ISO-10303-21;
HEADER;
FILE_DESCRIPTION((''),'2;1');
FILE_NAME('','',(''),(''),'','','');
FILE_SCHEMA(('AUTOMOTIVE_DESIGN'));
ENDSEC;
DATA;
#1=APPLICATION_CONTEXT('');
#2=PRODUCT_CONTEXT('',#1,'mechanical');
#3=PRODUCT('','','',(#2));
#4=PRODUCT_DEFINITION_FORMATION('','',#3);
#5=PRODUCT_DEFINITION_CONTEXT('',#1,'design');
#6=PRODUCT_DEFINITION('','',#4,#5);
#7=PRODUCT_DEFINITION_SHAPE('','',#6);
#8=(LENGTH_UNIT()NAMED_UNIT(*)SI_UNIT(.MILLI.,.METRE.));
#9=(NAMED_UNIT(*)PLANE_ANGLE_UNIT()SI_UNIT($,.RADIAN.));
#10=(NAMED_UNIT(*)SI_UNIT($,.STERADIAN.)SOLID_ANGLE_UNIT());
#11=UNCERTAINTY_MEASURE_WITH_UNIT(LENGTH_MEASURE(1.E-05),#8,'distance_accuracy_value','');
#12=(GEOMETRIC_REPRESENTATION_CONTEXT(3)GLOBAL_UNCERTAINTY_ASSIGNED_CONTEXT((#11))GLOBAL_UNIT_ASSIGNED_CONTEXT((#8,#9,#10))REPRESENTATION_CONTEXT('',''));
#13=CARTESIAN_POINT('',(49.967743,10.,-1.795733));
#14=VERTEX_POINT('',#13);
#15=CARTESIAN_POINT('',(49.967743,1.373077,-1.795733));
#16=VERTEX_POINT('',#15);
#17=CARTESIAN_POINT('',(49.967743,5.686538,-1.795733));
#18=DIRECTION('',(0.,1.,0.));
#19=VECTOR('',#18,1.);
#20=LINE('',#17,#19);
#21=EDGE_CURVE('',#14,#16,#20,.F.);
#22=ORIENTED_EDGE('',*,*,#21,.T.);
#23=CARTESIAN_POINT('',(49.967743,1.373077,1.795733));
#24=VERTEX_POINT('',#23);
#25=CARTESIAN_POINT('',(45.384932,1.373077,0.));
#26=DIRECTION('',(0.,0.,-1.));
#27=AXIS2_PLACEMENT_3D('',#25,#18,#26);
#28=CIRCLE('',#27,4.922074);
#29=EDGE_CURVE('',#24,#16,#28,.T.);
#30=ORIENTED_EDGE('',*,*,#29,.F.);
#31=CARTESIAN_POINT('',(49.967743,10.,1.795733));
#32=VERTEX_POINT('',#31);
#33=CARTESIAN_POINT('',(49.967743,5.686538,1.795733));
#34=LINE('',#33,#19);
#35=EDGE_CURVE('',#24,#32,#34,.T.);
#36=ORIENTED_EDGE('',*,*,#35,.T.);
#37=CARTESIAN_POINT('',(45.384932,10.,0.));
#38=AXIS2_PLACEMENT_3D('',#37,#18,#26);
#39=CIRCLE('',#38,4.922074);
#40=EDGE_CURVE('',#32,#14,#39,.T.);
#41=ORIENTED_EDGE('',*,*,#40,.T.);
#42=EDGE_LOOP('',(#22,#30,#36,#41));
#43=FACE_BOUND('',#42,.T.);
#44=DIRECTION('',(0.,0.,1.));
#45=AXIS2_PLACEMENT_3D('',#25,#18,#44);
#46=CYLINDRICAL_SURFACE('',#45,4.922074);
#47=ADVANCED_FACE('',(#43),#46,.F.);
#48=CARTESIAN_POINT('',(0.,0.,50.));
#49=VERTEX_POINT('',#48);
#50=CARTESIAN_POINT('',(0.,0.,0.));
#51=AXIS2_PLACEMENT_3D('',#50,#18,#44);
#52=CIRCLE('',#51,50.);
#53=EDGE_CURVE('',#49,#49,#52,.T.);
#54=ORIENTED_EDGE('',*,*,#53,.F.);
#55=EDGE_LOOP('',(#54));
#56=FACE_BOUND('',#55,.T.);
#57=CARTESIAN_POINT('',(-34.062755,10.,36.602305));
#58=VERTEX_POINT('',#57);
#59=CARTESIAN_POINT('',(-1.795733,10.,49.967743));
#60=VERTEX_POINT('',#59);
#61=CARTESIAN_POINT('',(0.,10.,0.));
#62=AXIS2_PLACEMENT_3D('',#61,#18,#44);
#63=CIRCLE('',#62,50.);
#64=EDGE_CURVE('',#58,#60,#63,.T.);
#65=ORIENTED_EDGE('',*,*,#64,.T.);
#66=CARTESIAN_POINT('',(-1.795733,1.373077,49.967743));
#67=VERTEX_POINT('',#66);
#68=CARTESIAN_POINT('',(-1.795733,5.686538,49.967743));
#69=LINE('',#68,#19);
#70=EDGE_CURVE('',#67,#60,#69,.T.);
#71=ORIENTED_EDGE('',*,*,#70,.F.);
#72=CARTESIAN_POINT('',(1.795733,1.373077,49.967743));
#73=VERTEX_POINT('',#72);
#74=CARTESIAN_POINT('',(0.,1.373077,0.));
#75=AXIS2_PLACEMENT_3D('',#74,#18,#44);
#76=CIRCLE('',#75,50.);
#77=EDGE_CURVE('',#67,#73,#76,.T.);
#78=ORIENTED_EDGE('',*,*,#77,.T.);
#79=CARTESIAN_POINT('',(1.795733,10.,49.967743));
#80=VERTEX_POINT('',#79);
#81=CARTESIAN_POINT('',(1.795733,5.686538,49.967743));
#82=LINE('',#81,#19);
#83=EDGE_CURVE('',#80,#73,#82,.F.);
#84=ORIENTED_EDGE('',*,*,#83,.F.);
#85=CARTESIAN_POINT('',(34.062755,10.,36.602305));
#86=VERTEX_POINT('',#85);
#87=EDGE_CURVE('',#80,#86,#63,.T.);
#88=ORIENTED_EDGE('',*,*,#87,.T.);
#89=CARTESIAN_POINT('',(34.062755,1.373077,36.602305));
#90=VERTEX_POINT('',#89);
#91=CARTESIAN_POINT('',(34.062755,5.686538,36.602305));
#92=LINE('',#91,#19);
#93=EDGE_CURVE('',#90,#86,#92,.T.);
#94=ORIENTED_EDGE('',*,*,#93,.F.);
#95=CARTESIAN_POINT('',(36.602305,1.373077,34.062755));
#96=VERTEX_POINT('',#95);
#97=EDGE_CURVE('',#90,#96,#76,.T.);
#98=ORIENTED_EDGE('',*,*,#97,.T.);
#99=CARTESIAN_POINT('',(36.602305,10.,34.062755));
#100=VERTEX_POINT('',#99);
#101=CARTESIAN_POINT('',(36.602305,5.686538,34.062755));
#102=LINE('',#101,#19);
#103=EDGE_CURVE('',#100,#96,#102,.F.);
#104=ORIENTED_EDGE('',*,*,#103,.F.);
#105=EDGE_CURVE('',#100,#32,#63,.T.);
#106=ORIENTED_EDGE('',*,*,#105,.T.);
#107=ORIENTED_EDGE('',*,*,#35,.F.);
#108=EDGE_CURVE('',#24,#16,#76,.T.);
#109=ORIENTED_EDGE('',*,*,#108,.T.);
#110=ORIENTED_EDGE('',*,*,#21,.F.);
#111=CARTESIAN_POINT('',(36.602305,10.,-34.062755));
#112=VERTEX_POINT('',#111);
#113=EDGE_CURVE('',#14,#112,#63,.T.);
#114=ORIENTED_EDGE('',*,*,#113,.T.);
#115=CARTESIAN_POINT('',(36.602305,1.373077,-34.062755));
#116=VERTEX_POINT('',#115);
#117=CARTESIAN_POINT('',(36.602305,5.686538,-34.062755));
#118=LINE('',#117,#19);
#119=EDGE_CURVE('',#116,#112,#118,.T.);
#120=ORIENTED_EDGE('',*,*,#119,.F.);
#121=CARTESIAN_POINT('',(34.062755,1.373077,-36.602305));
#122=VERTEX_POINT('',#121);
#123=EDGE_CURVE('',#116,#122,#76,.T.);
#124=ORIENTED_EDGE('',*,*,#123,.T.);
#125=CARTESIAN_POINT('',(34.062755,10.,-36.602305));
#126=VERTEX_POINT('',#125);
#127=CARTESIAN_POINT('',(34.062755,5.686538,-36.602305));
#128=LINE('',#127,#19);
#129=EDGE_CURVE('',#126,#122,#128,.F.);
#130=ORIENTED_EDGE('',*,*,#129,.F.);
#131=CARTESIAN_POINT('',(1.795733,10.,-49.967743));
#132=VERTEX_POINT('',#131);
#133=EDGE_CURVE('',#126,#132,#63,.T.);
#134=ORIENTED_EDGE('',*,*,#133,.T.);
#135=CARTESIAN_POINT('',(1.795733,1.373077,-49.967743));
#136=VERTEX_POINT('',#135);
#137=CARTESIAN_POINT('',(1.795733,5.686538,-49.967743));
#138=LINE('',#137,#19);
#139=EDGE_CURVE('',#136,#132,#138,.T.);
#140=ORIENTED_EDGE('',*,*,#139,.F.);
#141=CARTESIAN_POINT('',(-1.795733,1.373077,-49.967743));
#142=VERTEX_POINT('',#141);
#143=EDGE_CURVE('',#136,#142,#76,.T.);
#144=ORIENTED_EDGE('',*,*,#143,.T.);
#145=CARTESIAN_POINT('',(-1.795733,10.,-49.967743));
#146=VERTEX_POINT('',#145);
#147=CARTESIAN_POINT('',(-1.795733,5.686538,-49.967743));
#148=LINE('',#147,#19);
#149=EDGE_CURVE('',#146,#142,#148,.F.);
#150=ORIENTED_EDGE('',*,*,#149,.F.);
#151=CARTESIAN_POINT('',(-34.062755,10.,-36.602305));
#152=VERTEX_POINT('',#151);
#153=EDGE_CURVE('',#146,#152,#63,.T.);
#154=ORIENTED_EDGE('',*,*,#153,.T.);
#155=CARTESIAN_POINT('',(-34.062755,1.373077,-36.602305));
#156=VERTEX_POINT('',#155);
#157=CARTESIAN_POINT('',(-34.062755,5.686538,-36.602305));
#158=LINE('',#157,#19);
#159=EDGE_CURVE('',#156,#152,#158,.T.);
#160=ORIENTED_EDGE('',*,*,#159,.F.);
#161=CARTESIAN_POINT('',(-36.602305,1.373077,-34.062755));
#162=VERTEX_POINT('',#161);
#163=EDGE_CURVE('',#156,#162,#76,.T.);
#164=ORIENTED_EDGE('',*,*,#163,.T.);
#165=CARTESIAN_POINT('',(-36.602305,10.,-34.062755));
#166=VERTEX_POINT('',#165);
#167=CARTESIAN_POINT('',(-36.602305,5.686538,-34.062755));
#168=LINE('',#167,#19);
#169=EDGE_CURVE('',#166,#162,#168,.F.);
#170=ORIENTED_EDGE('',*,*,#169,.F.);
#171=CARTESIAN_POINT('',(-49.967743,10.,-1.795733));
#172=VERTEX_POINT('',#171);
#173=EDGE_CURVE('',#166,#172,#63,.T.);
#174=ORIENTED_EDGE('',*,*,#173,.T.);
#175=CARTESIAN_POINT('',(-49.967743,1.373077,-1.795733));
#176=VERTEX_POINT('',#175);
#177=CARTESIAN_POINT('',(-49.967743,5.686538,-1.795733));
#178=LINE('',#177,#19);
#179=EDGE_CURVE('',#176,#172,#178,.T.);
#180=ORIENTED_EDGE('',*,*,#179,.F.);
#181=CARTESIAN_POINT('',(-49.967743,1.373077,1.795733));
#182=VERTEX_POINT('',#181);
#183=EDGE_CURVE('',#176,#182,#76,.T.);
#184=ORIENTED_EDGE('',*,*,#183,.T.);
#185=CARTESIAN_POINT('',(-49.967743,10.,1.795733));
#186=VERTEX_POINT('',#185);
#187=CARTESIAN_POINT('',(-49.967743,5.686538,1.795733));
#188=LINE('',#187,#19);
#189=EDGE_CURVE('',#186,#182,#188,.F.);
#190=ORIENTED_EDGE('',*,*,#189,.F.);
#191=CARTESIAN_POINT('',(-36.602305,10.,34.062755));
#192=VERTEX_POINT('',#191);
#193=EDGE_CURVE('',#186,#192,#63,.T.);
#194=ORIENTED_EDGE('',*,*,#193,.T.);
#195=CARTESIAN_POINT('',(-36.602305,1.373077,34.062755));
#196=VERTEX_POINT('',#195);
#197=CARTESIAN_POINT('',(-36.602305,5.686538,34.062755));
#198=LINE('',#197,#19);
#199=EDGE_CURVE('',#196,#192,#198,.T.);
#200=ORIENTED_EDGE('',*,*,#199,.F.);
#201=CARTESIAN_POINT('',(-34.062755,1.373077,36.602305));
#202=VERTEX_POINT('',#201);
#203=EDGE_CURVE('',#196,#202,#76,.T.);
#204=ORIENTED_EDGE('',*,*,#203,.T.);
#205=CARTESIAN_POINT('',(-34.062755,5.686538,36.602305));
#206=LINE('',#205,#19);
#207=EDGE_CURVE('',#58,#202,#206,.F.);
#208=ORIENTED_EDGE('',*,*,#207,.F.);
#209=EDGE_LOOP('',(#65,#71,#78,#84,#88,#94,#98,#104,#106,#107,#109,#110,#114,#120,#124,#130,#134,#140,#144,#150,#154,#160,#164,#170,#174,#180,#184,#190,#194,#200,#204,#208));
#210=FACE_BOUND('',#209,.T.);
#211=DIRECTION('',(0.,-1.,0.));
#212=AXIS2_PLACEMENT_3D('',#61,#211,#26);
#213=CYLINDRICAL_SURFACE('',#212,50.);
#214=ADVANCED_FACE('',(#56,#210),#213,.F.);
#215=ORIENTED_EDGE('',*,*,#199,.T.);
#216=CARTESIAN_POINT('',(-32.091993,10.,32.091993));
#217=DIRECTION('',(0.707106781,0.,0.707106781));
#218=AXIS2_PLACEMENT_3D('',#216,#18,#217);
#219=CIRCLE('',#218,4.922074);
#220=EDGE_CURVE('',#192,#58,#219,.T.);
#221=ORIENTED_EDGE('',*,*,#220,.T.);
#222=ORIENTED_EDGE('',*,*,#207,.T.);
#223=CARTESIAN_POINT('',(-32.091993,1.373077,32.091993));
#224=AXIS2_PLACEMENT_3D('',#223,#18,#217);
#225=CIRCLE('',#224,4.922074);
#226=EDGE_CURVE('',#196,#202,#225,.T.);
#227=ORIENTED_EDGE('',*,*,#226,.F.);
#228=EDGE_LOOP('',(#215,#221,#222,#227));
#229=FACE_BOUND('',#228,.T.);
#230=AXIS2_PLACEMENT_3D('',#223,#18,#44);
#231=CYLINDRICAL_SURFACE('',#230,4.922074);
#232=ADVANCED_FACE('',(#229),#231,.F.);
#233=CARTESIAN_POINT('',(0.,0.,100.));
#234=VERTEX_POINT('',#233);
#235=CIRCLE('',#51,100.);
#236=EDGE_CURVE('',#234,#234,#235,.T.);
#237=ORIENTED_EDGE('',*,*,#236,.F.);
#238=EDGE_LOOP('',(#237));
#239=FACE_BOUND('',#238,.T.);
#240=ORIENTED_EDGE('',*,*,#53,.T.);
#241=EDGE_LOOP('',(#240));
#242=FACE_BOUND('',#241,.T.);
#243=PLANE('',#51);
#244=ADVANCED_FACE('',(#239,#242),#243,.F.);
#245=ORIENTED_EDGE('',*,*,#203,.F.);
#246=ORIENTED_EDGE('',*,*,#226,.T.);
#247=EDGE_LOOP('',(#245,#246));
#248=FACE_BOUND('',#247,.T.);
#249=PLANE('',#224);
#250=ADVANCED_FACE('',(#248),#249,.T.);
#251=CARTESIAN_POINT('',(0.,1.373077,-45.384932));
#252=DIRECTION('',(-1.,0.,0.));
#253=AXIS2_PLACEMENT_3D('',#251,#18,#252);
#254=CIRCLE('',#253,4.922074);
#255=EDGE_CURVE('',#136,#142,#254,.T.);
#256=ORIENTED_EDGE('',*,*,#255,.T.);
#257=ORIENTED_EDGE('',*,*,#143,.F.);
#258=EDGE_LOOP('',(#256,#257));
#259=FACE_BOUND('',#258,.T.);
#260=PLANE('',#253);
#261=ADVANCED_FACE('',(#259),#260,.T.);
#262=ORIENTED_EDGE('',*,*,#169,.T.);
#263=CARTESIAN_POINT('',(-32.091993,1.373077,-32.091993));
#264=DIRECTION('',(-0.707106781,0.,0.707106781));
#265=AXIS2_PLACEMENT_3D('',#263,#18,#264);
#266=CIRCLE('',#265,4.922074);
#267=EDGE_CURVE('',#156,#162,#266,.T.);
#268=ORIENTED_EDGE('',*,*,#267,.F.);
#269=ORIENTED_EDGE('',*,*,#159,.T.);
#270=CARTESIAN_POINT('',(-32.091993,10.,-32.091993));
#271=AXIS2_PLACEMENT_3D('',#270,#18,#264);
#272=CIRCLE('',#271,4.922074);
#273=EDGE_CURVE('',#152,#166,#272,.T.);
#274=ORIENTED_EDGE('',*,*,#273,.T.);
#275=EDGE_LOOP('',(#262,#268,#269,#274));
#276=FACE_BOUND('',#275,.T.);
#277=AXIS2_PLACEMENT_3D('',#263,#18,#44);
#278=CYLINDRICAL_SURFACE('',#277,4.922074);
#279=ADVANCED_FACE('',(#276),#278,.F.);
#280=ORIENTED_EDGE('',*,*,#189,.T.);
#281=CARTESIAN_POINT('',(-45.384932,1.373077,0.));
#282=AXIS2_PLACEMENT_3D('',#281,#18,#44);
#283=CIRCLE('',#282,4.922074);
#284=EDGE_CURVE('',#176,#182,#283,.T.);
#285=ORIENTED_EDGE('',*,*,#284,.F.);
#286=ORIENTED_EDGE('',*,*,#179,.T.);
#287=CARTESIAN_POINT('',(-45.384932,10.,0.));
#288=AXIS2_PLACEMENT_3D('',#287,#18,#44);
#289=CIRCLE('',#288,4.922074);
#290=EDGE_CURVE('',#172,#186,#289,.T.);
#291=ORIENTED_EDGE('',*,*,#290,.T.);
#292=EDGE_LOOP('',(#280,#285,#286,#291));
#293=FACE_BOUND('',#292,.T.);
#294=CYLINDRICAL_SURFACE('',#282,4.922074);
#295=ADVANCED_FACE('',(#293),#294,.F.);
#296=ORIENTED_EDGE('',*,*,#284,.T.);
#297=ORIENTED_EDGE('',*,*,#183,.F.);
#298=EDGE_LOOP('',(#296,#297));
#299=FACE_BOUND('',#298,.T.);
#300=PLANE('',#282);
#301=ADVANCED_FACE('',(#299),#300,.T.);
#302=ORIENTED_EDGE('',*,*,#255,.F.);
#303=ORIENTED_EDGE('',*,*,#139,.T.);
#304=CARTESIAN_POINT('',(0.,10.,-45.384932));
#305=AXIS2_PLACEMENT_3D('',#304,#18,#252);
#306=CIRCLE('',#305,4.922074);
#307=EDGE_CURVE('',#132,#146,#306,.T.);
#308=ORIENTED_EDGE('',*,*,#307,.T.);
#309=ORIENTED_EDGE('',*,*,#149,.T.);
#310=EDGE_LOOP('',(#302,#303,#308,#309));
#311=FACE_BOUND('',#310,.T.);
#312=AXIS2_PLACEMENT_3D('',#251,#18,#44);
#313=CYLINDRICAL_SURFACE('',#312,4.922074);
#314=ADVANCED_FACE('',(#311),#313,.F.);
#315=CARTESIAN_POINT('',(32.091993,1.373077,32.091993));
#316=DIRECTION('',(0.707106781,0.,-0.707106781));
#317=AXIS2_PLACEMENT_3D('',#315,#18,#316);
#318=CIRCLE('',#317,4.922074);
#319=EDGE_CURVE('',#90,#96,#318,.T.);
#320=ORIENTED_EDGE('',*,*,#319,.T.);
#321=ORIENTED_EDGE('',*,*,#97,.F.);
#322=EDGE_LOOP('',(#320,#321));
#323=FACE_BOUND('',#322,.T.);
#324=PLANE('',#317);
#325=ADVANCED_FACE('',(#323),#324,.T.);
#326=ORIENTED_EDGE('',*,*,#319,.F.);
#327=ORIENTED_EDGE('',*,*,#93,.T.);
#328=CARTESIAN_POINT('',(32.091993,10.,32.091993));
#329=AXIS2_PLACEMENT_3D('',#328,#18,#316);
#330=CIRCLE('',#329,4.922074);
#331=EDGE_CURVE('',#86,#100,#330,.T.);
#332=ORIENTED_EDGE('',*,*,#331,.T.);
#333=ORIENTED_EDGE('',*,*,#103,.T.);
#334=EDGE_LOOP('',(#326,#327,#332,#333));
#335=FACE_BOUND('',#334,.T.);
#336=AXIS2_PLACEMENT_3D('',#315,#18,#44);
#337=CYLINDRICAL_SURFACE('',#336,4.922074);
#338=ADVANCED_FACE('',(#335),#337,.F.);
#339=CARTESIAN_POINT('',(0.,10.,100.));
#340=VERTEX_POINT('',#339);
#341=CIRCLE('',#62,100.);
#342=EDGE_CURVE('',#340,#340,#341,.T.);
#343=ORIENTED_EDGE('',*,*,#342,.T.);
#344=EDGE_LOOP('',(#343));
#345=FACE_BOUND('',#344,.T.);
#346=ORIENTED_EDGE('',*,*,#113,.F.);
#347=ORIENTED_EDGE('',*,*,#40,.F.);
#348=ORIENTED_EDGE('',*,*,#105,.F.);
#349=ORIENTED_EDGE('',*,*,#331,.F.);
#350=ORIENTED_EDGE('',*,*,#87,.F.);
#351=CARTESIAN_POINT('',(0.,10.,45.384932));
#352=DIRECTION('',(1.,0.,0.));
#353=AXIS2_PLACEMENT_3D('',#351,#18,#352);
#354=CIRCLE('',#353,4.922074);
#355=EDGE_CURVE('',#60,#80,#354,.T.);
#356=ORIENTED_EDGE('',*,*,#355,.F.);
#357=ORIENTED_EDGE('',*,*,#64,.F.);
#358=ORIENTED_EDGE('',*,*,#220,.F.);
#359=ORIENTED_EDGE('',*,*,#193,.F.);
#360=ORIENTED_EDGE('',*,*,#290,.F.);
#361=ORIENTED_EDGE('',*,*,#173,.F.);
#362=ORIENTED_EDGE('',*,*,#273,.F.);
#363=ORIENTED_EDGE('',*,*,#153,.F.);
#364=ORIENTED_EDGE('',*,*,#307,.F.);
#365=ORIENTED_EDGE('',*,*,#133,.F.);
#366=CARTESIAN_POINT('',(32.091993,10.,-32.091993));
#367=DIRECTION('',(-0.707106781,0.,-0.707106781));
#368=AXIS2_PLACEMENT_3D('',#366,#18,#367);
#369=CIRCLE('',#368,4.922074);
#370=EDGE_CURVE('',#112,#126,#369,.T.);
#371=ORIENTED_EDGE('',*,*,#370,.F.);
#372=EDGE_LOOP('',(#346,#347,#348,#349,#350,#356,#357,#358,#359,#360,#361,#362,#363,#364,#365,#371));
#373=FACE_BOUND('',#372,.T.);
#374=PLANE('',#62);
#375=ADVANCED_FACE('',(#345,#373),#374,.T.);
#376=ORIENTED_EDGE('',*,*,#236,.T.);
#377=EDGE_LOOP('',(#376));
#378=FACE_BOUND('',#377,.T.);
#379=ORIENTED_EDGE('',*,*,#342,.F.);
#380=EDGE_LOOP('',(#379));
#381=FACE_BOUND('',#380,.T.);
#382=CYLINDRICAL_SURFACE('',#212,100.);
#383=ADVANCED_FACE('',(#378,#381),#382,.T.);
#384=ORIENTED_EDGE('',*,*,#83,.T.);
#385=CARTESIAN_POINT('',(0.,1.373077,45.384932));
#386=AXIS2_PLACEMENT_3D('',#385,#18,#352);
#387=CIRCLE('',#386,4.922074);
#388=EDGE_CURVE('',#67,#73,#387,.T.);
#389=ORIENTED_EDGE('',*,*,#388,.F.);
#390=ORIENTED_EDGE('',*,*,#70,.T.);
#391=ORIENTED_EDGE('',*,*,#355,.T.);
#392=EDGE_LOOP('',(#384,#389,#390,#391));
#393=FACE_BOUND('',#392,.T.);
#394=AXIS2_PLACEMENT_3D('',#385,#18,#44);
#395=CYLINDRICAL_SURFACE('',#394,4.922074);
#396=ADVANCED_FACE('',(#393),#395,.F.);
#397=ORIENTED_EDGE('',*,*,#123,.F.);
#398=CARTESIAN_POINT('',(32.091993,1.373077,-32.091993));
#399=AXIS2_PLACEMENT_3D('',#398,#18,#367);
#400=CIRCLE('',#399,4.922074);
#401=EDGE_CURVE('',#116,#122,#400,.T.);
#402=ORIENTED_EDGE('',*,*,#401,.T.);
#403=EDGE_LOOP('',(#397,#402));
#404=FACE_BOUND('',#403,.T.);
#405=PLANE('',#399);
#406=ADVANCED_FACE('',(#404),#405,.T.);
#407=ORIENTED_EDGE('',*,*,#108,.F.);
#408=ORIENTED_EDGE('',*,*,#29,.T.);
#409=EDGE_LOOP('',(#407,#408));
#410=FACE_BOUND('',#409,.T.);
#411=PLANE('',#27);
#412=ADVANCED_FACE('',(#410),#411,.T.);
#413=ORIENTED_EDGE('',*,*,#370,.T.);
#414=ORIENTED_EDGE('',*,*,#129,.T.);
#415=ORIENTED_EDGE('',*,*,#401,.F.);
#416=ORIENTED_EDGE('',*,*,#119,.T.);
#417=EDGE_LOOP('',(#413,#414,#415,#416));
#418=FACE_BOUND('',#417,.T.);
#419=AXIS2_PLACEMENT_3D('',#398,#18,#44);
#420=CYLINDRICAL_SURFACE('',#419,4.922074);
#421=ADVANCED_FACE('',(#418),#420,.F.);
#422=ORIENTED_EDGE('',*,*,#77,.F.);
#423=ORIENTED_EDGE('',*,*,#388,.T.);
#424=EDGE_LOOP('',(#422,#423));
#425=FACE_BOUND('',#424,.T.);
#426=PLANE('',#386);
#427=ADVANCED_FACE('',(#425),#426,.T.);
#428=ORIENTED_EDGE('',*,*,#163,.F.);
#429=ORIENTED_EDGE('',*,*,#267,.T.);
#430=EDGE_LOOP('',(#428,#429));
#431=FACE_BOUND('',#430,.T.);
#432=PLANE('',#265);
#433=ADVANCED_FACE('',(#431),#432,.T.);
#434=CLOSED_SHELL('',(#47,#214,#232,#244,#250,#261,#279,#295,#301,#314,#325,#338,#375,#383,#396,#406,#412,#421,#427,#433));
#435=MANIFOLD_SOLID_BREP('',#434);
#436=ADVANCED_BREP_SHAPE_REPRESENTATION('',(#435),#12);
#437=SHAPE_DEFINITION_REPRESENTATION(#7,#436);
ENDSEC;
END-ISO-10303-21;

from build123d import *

# Parameters (mm, degrees)
SKETCH1_R           = 100
BOSS_EXTRUDE1_DEPTH = 10
SKETCH2_R           = 50
CUT_EXTRUDE1_DEPTH  = 142.774468788
SKETCH3_R           = 4.922074395
CUT_EXTRUDE2_DEPTH  = 8.62692327
CIRPATTERN1_COUNT   = 8


with BuildPart() as part:
    # Sketch1 → Boss-Extrude1 (new body)
    with BuildSketch(Plane(origin=(0, 0, 0), x_dir=(1, 0, 0), z_dir=(0, 1, 0))):
        Circle(SKETCH1_R)
    extrude(amount=BOSS_EXTRUDE1_DEPTH)

    # Sketch2 → Cut-Extrude1 (cut, through all)
    with BuildSketch(Plane(origin=(0, 0, 0), x_dir=(1, 0, 0), z_dir=(0, 1, 0))):
        Circle(SKETCH2_R)
    extrude(amount=CUT_EXTRUDE1_DEPTH, mode=Mode.SUBTRACT)

    # Sketch3 → Cut-Extrude2 (cut)
    with BuildSketch(Plane(origin=(0, 10, 0), x_dir=(1, 0, 0), z_dir=(0, 1, 0))):
        with Locations((-45.384931855, 0)):
            Circle(SKETCH3_R)
    cut_extrude2 = extrude(amount=-CUT_EXTRUDE2_DEPTH, mode=Mode.SUBTRACT)

    # CirPattern1: Cut-Extrude2 ×8 about axis
    cirpattern1_axis = Axis((0, 0, 0), (0, 1, 0))
    for i in range(1, CIRPATTERN1_COUNT):
        add(cut_extrude2.rotate(cirpattern1_axis, i * 360 / CIRPATTERN1_COUNT), mode=Mode.SUBTRACT)


solid = part.part
